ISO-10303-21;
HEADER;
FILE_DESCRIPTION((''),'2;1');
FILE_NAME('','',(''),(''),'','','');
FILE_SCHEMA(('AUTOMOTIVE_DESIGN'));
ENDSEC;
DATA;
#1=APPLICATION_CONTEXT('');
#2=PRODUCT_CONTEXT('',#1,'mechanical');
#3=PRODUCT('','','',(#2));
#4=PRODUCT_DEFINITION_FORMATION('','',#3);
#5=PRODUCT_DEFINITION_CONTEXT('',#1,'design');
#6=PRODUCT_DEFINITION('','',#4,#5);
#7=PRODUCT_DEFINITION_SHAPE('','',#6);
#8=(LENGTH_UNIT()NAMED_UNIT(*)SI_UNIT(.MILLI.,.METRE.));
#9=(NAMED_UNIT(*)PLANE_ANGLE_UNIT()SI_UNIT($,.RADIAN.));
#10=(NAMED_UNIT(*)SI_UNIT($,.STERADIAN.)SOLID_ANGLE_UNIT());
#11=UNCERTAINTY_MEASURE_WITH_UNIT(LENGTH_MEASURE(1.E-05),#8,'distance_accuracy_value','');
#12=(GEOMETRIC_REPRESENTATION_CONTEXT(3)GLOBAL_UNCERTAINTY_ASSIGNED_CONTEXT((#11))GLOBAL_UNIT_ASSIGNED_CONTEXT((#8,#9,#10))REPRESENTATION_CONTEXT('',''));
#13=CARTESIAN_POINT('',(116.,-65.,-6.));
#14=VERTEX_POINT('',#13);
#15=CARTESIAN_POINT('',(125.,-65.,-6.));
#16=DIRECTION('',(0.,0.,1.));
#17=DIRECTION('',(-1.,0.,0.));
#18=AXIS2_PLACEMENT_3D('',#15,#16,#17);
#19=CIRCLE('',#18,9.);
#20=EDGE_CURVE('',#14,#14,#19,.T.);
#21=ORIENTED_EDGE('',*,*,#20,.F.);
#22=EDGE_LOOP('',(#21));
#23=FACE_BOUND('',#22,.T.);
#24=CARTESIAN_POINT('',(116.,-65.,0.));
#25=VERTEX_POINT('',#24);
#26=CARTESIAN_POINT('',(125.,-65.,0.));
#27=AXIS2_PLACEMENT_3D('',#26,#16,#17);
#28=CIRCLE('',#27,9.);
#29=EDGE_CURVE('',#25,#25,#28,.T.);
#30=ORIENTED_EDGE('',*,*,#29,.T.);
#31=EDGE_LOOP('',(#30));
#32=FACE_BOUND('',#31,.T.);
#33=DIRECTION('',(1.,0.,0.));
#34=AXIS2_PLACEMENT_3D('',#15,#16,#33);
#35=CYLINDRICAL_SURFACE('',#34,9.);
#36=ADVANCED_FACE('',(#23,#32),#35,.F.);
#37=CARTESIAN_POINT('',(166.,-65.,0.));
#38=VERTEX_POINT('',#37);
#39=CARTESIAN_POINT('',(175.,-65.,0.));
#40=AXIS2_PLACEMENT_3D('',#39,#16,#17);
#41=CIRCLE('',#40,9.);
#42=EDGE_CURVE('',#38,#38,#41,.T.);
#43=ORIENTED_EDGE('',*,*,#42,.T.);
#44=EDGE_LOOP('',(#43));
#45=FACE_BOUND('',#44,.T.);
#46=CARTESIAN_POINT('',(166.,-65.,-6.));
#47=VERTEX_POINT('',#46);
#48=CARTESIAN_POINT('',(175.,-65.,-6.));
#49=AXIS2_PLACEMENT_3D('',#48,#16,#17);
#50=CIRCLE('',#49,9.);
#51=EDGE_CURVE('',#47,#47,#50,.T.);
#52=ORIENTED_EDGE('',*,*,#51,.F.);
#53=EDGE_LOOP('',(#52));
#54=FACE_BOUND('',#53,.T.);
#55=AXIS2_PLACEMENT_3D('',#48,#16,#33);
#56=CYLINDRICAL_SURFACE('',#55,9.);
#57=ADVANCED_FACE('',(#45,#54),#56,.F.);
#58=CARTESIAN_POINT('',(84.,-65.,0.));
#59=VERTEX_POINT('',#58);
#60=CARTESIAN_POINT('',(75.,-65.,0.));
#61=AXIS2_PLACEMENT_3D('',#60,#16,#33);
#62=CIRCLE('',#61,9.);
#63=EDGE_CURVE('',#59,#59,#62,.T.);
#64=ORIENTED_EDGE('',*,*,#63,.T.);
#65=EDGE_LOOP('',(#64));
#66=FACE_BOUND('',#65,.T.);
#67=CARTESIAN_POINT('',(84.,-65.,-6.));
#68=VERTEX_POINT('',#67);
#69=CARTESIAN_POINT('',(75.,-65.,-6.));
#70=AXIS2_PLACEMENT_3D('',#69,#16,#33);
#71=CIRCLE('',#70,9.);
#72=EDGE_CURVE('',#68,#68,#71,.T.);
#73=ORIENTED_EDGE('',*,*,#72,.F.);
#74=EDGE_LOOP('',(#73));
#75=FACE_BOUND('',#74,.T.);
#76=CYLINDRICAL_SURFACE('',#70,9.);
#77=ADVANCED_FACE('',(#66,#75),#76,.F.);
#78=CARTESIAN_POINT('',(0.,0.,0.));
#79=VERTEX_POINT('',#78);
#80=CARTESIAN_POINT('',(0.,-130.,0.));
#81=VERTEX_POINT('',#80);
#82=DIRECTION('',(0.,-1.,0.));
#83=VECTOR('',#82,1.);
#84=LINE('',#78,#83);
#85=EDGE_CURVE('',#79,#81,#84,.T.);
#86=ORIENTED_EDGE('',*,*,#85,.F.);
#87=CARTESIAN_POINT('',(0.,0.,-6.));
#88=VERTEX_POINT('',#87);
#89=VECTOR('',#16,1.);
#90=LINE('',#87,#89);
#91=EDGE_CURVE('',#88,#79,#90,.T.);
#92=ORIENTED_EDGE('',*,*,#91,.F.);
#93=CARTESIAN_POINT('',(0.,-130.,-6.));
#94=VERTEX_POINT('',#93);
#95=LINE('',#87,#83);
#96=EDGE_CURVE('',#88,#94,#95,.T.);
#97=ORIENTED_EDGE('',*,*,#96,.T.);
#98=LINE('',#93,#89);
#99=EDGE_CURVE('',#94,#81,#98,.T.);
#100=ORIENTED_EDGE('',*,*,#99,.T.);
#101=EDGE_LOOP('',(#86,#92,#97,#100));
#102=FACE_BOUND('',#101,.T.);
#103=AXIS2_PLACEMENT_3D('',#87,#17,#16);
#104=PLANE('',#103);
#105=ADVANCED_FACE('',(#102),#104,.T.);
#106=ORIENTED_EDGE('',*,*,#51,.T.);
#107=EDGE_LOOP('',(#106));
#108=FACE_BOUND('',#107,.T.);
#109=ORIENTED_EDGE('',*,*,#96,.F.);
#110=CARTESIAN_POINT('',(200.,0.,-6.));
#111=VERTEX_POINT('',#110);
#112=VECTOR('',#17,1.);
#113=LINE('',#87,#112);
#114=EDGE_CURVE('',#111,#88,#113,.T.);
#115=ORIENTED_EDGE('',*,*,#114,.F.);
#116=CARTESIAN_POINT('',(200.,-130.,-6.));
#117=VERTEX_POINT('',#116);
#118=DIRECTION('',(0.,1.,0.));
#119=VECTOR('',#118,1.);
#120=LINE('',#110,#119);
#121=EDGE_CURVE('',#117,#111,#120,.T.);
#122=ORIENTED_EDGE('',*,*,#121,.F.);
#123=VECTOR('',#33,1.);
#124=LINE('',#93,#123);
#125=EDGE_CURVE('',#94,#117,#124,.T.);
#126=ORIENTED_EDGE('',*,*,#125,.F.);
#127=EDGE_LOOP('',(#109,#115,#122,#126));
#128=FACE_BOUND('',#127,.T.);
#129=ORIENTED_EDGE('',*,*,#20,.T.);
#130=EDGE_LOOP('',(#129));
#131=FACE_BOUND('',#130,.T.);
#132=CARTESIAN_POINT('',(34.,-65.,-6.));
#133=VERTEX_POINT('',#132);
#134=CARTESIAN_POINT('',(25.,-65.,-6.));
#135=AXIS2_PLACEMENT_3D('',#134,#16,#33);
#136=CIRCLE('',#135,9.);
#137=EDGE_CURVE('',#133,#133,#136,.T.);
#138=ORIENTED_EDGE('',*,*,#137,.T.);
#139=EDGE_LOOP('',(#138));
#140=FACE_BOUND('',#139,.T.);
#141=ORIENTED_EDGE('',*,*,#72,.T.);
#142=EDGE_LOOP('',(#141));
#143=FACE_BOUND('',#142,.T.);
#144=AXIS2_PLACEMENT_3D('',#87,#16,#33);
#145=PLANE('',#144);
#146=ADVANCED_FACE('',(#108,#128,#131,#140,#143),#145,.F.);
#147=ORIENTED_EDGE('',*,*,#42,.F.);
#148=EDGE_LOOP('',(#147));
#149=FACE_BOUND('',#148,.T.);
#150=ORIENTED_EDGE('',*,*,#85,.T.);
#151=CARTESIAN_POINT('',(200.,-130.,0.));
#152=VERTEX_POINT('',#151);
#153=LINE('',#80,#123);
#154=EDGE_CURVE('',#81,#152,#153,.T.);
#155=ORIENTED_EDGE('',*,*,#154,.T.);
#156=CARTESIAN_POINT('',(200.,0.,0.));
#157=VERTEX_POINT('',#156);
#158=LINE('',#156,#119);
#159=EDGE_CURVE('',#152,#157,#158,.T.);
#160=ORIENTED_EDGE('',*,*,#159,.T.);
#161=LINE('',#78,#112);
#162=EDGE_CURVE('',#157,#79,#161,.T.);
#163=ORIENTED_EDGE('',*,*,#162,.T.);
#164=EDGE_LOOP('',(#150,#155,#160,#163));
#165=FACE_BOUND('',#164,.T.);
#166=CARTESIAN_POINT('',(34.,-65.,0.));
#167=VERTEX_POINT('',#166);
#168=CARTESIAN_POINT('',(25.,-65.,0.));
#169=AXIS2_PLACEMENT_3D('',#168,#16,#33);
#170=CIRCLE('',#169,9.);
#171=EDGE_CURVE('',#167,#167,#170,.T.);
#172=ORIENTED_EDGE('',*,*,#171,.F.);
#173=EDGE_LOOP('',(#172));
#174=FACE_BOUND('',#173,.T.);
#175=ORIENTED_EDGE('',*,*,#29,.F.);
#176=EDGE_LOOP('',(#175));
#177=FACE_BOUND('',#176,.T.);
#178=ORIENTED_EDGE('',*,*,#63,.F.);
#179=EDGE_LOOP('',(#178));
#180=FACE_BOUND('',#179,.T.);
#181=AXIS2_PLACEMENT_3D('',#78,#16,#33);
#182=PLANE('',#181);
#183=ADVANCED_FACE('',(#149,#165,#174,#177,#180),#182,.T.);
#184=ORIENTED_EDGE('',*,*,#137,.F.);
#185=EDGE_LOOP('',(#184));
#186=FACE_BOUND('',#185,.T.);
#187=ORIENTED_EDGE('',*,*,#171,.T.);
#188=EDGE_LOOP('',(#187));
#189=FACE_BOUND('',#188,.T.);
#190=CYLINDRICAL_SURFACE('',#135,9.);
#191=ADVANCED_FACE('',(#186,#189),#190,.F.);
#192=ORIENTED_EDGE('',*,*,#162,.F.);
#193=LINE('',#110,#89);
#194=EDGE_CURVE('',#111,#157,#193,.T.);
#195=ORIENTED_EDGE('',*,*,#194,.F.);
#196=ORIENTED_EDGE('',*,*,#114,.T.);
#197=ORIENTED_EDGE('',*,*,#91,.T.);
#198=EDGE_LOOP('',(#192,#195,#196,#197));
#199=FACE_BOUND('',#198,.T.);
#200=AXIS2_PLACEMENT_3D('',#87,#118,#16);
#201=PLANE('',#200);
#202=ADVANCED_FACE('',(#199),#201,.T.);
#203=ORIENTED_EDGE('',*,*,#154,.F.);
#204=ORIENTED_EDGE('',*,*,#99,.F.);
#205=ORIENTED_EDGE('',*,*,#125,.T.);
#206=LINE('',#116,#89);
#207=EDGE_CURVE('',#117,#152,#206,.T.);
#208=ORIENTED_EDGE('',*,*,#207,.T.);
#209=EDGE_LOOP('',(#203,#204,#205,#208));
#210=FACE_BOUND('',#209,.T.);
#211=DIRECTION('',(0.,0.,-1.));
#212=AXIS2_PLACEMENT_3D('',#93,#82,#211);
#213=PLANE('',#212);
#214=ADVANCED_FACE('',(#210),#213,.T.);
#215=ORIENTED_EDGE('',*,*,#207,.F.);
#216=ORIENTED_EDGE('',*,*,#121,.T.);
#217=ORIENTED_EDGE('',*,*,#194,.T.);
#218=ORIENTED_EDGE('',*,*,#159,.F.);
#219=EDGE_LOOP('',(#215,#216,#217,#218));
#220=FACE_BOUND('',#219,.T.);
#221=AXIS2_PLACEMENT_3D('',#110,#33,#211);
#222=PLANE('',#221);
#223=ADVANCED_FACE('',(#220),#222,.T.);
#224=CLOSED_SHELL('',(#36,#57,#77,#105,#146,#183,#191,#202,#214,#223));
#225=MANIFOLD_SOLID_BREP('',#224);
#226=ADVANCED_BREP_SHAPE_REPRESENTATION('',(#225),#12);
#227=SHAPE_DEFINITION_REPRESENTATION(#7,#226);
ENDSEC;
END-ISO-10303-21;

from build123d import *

# Parameters (mm, degrees)
SKETCH_1_W             = 200
SKETCH_1_H             = 130
SKETCH_1_R             = 9
SM_BASE_FLANGE_1_DEPTH = 6


# Sheet-metal steps are written as plain solids
with BuildPart() as part:
    # Sketch 1 → Базовая кромка1 (new body)
    with BuildSketch(Plane.XY):
        with Locations((100, -65)):
            Rectangle(SKETCH_1_W, SKETCH_1_H)
        with Locations((75, -65)):
            Circle(SKETCH_1_R, mode=Mode.SUBTRACT)
        with Locations((25, -65)):
            Circle(SKETCH_1_R, mode=Mode.SUBTRACT)
        with Locations(Location((125, -65, 0), (0, 0, 180))):
            Circle(SKETCH_1_R, mode=Mode.SUBTRACT)
        with Locations(Location((175, -65, 0), (0, 0, 180))):
            Circle(SKETCH_1_R, mode=Mode.SUBTRACT)
    extrude(amount=-SM_BASE_FLANGE_1_DEPTH)


solid = part.part
